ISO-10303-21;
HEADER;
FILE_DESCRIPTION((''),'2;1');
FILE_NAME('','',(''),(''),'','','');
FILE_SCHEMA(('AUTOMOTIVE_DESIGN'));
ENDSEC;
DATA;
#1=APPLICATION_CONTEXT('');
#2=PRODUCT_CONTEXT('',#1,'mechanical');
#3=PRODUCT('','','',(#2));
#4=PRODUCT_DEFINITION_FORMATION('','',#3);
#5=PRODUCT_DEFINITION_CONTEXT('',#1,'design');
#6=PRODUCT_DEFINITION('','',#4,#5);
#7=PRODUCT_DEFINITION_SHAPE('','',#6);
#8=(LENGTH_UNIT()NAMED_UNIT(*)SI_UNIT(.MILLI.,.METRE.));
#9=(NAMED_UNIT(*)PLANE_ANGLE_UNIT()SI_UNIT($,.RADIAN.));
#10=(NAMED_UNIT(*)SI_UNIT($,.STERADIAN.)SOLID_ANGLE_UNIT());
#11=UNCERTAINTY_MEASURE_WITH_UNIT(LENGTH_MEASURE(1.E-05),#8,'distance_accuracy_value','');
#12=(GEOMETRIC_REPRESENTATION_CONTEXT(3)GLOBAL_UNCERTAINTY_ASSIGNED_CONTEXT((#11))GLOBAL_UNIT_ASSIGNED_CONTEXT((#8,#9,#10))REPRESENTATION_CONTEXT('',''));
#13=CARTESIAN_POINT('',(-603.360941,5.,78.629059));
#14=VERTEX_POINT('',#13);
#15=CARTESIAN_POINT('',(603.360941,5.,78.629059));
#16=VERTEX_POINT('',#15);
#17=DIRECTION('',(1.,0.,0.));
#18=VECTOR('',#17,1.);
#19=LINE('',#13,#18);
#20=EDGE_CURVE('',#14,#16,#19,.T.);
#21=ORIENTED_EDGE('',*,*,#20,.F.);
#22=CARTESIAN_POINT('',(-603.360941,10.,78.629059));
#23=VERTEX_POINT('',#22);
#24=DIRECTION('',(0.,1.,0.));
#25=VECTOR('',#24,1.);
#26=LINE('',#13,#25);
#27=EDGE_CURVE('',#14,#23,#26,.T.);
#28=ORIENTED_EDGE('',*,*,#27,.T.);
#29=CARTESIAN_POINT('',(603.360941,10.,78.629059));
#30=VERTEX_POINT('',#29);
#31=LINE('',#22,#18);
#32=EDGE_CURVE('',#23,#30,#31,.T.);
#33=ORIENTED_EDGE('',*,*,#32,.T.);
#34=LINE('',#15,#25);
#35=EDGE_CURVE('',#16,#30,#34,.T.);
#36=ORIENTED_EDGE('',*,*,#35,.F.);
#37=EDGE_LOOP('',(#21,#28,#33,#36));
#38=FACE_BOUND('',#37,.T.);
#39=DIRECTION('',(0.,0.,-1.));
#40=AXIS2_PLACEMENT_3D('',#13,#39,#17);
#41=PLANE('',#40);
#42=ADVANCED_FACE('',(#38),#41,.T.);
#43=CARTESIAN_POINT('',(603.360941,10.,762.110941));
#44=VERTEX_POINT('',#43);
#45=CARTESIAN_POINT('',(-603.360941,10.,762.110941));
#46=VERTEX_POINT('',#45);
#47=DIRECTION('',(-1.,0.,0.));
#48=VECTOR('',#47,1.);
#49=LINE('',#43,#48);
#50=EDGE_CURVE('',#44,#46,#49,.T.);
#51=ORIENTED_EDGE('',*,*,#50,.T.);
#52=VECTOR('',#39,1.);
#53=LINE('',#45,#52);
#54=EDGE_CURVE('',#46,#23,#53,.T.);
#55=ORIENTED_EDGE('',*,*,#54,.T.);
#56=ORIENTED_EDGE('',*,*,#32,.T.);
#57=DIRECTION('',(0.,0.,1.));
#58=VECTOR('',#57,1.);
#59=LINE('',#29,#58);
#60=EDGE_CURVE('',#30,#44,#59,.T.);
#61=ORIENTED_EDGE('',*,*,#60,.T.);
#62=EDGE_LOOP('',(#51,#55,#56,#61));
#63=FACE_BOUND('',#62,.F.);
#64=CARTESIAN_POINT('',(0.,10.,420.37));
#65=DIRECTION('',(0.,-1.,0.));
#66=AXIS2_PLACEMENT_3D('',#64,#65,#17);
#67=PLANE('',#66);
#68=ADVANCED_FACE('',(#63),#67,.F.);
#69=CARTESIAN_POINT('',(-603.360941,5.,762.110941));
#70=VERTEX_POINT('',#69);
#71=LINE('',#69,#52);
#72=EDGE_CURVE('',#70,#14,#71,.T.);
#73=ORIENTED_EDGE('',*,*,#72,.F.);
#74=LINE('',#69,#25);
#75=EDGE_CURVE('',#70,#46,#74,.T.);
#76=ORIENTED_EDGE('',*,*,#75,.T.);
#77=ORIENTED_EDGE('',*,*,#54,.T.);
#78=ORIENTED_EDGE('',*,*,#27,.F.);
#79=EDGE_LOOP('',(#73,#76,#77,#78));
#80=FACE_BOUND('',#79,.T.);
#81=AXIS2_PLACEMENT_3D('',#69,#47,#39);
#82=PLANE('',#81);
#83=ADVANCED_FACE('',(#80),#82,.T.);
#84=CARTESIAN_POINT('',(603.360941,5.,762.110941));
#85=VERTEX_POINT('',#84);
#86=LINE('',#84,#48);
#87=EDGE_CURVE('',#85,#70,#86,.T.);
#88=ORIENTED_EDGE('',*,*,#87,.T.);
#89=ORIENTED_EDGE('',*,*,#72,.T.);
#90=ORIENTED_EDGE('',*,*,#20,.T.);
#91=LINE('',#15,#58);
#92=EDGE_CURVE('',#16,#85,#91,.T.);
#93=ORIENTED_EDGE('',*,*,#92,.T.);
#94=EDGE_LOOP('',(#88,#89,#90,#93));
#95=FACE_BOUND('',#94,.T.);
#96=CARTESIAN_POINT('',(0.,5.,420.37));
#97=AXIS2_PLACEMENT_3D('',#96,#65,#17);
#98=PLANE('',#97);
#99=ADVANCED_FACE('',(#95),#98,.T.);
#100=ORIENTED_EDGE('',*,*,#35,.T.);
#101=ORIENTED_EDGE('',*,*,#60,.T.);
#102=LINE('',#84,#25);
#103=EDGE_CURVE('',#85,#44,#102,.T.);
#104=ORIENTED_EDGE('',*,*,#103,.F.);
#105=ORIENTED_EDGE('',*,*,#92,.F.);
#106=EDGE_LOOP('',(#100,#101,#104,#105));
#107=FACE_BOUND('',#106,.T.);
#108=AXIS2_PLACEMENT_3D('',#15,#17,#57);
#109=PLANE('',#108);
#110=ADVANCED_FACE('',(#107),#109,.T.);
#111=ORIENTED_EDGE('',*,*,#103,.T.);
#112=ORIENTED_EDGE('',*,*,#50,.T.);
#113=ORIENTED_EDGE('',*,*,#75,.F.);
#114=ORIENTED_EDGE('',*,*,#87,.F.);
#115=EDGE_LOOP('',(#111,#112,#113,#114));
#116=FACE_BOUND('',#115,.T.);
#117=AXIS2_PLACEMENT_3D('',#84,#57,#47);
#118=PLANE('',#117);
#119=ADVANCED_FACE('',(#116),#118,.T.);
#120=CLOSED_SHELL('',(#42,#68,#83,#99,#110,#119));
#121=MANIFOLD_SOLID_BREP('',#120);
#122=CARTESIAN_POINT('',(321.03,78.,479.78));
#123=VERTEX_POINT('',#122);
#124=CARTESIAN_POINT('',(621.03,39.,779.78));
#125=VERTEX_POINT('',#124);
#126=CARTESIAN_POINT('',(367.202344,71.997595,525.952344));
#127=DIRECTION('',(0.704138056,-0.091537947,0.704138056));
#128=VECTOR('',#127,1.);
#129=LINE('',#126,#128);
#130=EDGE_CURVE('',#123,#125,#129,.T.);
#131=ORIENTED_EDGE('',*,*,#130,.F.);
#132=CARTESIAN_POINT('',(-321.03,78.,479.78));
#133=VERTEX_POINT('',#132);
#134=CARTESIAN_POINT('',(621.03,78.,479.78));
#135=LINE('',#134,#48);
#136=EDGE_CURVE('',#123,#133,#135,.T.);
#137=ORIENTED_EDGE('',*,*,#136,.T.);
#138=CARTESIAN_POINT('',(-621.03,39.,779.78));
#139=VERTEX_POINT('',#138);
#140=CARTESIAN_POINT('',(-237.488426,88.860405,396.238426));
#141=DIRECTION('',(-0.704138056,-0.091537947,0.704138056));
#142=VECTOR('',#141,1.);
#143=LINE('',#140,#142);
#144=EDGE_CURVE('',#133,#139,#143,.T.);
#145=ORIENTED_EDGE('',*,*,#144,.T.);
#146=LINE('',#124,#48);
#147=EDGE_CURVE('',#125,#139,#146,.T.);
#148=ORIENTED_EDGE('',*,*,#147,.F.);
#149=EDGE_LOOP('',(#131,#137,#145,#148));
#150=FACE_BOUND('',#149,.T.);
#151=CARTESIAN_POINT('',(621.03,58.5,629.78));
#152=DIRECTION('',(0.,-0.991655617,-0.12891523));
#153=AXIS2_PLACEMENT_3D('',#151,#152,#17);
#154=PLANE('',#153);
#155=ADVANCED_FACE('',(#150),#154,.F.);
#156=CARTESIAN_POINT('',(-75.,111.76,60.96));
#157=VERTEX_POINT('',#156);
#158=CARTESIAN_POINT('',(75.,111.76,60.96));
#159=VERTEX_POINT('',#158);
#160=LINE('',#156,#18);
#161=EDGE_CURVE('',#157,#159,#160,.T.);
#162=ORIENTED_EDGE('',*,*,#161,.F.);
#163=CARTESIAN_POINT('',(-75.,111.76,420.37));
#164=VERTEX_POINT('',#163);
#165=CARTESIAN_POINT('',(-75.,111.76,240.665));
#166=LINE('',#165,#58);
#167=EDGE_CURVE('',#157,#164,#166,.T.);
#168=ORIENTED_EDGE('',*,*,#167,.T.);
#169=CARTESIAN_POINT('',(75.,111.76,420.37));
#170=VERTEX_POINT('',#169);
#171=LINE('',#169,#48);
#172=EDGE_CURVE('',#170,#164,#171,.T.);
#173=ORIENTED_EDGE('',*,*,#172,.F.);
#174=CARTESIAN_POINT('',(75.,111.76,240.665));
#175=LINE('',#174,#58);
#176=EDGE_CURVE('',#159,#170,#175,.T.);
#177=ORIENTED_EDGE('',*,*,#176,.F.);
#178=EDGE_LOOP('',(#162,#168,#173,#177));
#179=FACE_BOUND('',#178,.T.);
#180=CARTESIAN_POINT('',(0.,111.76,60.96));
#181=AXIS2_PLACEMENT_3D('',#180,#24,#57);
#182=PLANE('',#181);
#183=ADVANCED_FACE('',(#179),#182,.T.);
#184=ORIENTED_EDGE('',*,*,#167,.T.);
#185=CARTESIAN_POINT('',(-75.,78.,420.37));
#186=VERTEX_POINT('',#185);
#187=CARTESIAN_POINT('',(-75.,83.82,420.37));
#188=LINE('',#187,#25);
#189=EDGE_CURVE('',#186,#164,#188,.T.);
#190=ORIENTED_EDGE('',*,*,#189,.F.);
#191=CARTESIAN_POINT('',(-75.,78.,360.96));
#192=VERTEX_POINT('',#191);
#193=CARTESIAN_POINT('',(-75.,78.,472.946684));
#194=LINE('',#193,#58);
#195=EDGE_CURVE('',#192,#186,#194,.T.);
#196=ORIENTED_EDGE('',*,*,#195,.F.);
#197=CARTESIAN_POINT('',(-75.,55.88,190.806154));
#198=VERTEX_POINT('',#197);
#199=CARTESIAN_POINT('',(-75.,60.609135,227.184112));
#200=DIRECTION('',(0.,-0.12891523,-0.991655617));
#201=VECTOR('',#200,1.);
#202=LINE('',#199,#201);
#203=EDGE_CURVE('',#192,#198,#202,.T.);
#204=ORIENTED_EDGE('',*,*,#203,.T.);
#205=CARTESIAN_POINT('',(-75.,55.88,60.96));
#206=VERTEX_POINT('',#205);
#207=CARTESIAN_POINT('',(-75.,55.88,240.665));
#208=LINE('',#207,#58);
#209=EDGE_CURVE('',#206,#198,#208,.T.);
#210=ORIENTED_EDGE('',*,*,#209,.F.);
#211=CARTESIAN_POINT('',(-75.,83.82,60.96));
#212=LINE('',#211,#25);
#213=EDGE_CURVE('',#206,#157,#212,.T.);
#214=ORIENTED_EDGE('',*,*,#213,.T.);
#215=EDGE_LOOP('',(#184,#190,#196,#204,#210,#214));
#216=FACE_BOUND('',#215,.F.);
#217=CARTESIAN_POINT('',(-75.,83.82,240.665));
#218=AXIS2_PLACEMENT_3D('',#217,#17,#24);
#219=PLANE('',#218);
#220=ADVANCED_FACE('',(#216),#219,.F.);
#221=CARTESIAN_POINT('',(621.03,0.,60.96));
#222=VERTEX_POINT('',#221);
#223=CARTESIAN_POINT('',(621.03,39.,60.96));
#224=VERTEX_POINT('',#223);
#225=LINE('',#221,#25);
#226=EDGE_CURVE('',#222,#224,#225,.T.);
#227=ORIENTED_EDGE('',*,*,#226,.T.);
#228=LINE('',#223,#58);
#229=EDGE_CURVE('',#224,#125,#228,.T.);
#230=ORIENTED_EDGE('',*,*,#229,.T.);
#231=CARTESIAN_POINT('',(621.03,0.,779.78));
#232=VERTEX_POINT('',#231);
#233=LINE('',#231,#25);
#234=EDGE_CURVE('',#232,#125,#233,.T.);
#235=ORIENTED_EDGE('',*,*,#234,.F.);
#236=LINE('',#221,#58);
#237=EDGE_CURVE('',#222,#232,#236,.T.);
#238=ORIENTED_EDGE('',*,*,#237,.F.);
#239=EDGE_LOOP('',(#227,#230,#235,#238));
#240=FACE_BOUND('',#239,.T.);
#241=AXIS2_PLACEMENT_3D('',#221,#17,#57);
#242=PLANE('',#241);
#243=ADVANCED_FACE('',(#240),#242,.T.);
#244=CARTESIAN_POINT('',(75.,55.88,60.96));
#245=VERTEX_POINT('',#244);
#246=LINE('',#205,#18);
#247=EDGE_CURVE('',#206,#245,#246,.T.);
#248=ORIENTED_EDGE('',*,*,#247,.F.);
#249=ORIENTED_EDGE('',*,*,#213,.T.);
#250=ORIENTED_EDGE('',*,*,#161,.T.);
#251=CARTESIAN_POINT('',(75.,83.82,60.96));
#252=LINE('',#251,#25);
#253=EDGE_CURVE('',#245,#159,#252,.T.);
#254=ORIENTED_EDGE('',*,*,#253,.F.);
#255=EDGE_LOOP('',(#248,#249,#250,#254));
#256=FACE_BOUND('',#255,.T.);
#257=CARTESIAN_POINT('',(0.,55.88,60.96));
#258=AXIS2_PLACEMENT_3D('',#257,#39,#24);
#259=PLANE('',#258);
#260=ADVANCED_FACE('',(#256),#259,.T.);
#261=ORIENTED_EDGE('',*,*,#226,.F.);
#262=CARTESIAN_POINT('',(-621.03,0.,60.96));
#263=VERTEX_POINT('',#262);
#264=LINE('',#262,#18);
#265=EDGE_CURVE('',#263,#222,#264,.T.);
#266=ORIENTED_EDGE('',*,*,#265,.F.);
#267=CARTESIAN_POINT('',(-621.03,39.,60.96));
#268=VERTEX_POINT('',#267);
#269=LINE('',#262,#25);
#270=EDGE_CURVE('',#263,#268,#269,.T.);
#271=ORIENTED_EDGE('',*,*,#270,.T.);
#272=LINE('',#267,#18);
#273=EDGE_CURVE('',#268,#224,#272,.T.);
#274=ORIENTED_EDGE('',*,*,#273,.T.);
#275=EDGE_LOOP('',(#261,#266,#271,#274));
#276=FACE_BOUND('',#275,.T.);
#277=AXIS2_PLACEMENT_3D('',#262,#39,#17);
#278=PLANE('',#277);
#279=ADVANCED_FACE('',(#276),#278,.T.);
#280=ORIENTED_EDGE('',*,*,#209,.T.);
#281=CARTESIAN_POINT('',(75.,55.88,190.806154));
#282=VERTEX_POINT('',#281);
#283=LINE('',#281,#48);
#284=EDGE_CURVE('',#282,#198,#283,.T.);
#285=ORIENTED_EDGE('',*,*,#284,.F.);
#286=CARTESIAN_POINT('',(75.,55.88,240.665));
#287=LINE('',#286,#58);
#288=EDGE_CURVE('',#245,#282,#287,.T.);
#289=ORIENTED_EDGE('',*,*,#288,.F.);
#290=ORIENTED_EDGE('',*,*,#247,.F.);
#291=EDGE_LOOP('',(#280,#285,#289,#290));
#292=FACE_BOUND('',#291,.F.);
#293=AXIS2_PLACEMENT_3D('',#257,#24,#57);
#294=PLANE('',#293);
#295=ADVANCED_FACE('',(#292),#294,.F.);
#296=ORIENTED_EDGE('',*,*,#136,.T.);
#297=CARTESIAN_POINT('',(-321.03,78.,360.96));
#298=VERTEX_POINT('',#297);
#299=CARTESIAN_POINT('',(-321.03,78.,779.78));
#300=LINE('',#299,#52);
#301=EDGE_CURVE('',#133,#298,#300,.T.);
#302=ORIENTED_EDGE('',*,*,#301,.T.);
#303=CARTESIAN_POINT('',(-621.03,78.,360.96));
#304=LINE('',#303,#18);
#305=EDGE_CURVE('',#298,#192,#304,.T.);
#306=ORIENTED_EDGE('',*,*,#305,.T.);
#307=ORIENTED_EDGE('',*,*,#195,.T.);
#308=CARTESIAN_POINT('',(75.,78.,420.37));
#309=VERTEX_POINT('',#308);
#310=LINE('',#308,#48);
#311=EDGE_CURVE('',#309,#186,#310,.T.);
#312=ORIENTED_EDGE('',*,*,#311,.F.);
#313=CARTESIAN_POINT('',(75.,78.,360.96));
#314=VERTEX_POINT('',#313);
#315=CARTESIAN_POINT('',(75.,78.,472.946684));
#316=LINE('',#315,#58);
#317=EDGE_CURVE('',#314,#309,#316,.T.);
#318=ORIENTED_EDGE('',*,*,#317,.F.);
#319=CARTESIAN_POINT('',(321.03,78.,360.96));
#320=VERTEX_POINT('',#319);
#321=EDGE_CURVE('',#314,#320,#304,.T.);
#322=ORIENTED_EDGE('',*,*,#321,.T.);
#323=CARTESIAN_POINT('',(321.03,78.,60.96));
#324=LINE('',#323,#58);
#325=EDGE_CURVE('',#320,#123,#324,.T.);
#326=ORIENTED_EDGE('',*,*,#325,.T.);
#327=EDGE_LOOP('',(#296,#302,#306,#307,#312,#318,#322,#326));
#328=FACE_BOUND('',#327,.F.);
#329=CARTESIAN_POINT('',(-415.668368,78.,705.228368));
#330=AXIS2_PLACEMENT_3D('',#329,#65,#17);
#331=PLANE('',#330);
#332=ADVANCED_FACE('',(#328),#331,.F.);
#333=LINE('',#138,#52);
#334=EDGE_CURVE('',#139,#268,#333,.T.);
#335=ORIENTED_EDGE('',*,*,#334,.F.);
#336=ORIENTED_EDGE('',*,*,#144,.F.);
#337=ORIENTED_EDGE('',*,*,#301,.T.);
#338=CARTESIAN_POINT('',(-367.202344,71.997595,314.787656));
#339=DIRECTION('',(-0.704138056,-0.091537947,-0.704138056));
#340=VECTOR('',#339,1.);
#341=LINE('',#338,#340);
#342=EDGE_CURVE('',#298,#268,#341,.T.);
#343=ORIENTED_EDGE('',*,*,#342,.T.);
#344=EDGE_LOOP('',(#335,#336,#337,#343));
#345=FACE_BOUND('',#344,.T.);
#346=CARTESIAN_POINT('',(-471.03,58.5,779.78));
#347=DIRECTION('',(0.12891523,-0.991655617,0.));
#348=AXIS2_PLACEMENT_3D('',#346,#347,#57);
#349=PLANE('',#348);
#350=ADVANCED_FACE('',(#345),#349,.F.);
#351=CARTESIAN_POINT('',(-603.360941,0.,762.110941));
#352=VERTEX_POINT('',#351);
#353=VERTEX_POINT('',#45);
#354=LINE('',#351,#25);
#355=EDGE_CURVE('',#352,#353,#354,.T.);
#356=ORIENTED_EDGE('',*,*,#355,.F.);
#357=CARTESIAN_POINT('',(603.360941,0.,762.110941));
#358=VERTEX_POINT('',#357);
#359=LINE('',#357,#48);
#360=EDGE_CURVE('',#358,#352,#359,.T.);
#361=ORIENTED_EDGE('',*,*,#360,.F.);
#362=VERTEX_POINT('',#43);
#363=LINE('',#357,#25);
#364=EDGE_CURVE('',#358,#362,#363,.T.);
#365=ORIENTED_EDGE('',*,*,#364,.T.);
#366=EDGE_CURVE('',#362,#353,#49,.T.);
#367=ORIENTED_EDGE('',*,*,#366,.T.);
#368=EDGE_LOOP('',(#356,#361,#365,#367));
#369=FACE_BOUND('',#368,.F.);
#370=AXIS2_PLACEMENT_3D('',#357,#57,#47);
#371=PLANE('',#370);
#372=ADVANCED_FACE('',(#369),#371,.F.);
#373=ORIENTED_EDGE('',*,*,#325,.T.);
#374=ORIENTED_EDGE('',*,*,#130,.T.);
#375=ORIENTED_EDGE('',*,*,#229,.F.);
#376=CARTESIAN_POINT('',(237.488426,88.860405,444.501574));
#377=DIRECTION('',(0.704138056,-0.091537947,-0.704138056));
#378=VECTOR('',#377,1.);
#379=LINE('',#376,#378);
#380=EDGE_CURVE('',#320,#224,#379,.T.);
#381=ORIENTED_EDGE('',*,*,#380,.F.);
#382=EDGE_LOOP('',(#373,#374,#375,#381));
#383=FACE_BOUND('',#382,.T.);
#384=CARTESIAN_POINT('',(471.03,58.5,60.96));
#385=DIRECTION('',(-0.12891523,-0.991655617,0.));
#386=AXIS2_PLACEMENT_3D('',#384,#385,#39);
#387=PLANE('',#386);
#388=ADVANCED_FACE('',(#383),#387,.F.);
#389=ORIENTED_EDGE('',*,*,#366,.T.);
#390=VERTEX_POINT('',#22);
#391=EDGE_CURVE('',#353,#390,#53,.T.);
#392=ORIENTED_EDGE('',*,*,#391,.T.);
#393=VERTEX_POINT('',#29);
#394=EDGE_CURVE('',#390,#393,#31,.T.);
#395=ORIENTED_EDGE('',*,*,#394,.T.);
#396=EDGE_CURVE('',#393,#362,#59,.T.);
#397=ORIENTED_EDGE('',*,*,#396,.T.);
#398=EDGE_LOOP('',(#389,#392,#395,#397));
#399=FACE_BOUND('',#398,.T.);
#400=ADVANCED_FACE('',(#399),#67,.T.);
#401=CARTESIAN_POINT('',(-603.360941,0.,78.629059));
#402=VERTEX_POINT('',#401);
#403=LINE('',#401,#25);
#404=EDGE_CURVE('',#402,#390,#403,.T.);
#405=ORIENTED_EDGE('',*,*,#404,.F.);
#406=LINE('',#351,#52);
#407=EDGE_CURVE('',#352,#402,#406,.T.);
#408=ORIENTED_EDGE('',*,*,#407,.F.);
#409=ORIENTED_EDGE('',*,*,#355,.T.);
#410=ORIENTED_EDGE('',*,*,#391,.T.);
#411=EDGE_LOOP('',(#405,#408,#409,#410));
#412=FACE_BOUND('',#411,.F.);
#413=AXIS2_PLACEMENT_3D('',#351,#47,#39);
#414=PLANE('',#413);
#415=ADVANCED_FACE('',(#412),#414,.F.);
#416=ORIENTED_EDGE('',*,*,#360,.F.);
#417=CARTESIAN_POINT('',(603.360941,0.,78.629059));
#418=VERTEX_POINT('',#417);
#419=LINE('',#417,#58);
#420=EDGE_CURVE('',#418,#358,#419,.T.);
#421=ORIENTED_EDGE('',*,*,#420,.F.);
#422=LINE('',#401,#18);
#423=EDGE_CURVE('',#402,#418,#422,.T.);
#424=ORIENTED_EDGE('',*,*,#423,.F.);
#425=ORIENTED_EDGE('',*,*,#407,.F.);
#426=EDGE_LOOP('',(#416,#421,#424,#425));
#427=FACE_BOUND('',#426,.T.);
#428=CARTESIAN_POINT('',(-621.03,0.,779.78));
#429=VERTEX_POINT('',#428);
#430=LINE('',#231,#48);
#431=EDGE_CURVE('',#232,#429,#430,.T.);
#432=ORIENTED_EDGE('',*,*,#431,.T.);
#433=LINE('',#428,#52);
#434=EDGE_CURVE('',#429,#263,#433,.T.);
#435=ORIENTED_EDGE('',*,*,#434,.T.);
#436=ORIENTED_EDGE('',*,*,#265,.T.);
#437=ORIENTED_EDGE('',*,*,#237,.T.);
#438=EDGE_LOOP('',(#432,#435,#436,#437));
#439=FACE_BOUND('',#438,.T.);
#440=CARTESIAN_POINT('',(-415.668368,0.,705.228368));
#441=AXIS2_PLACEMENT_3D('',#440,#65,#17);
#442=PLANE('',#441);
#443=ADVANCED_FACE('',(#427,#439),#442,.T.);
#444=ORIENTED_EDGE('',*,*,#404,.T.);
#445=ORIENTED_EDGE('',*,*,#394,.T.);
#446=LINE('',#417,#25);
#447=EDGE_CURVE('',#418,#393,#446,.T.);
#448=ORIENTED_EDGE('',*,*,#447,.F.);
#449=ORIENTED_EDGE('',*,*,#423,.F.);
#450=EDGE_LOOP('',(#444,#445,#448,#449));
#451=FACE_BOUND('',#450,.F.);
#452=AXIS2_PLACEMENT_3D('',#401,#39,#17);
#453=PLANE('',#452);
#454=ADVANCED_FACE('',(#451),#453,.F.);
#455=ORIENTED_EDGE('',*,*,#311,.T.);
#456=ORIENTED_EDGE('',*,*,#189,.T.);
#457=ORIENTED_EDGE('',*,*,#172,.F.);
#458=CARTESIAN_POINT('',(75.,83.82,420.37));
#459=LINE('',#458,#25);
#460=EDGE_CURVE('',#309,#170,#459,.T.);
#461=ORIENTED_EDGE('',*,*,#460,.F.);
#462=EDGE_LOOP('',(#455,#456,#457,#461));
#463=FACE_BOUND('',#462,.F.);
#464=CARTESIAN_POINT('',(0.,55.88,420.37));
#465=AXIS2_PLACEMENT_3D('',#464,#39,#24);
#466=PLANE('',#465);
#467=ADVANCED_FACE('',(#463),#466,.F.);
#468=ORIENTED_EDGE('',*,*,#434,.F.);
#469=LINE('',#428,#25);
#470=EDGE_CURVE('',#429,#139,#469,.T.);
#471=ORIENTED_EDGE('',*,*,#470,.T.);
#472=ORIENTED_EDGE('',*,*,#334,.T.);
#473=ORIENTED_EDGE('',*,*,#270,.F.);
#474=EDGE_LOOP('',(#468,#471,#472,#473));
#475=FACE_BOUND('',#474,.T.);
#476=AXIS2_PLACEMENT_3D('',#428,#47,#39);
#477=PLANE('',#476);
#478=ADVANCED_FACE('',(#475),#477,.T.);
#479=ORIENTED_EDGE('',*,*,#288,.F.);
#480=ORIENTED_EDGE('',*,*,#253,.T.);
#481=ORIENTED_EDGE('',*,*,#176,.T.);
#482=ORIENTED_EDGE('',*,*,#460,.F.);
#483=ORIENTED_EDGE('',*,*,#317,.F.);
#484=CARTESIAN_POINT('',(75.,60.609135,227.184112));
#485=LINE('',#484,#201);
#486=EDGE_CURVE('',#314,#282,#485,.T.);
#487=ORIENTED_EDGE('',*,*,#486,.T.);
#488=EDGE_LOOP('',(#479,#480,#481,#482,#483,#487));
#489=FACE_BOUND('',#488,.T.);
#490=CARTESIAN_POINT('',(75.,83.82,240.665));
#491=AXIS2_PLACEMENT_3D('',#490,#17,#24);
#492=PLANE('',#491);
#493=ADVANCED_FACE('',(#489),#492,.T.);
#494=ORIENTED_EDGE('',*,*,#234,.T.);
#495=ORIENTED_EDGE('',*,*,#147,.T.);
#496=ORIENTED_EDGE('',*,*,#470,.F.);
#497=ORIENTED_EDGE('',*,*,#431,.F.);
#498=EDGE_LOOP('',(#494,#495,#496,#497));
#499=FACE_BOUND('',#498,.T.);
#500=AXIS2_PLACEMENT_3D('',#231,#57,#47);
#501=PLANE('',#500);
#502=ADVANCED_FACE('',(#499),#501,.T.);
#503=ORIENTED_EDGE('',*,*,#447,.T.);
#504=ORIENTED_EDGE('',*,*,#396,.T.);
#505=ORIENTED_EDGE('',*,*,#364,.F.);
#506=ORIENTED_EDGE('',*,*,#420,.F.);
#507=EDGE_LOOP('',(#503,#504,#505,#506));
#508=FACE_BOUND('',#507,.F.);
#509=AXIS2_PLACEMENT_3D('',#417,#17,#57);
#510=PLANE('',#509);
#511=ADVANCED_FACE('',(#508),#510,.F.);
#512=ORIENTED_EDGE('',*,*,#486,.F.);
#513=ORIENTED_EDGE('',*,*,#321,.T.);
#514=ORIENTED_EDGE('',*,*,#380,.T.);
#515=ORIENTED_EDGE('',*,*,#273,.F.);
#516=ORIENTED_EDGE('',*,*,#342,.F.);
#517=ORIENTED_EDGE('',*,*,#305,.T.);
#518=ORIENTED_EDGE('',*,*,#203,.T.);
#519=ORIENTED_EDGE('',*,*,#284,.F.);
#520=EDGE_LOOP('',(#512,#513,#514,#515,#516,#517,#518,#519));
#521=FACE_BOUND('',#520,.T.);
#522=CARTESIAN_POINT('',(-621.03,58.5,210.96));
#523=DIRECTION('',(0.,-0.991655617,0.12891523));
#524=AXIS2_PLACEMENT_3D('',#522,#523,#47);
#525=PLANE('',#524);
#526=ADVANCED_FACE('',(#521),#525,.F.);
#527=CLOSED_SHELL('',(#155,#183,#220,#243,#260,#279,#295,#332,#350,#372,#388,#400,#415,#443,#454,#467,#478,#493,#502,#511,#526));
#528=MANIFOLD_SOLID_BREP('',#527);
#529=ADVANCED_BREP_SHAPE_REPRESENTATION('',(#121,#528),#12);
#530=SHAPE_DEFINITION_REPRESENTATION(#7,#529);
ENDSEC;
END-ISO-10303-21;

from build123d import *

# Parameters (mm, degrees)
F2_DEPTH      = 78
F3_DEPTH      = 10
F4_START      = -5
F4_DEPTH      = 5
F5_SIZE2      = 39
F5_SIZE       = 300
F1_W          = 55.88
F1_H          = 359.41
F6_DEPTH      = 75
F6_DEPTH_BACK = 75


with BuildPart() as f2:
    # F0 (on Front) → F2 (new body)
    with BuildSketch(Plane.XZ):
        Polygon((0, 779.78), (-621.03, 779.78), (-621.03, 420.37), (-603.3609412751, 420.37), (-603.3609412751, 762.1109412751), (0, 762.1109412751), align=None)
        Polygon((621.03, 779.78), (0, 779.78), (0, 762.1109412751), (603.3609412751, 762.1109412751), (603.3609412751, 78.6290587249), (-603.3609412751, 78.6290587249), (-603.3609412751, 420.37), (-621.03, 420.37), (-621.03, 60.96), (0, 60.96), (621.03, 60.96), align=None)
        Polygon((603.3609412751, 762.1109412751), (0, 762.1109412751), (-603.3609412751, 762.1109412751), (-603.3609412751, 420.37), (-603.3609412751, 78.6290587249), (603.3609412751, 78.6290587249), align=None)
    extrude(amount=-F2_DEPTH)

    # F0 (on Front) → F3 (cut)
    with BuildSketch(Plane.XZ):
        Polygon((603.3609412751, 762.1109412751), (0, 762.1109412751), (-603.3609412751, 762.1109412751), (-603.3609412751, 420.37), (-603.3609412751, 78.6290587249), (603.3609412751, 78.6290587249), align=None)
    extrude(amount=-F3_DEPTH, mode=Mode.SUBTRACT)

    # F5
    f5_edges = [f2.edges().sort_by_distance(p)[0] for p in [
        (0, 78, 779.78),
        (-621.03, 78, 420.37),
        (0, 78, 60.96),
        (621.03, 78, 420.37),
    ]]
    f5_side = f2.faces().sort_by_distance((0, 78, 420.37))[0]
    chamfer(f5_edges, length=F5_SIZE, length2=F5_SIZE2, reference=f5_side)

    # F1 (on Right) → F6 (join, two sides)
    with BuildSketch(Plane.YZ) as f6_sk:
        with Locations((83.82, 240.665)):
            Rectangle(F1_W, F1_H)
    extrude(amount=F6_DEPTH)
    extrude(f6_sk.sketch, amount=-F6_DEPTH_BACK)


with BuildPart() as f4:
    # F0 (on Front) → F4 (new body)
    with BuildSketch(Plane.XZ.offset(F4_START)):
        Polygon((603.3609412751, 762.1109412751), (0, 762.1109412751), (-603.3609412751, 762.1109412751), (-603.3609412751, 420.37), (-603.3609412751, 78.6290587249), (603.3609412751, 78.6290587249), align=None)
    extrude(amount=-F4_DEPTH)


solid = Compound([f2.part, f4.part])
